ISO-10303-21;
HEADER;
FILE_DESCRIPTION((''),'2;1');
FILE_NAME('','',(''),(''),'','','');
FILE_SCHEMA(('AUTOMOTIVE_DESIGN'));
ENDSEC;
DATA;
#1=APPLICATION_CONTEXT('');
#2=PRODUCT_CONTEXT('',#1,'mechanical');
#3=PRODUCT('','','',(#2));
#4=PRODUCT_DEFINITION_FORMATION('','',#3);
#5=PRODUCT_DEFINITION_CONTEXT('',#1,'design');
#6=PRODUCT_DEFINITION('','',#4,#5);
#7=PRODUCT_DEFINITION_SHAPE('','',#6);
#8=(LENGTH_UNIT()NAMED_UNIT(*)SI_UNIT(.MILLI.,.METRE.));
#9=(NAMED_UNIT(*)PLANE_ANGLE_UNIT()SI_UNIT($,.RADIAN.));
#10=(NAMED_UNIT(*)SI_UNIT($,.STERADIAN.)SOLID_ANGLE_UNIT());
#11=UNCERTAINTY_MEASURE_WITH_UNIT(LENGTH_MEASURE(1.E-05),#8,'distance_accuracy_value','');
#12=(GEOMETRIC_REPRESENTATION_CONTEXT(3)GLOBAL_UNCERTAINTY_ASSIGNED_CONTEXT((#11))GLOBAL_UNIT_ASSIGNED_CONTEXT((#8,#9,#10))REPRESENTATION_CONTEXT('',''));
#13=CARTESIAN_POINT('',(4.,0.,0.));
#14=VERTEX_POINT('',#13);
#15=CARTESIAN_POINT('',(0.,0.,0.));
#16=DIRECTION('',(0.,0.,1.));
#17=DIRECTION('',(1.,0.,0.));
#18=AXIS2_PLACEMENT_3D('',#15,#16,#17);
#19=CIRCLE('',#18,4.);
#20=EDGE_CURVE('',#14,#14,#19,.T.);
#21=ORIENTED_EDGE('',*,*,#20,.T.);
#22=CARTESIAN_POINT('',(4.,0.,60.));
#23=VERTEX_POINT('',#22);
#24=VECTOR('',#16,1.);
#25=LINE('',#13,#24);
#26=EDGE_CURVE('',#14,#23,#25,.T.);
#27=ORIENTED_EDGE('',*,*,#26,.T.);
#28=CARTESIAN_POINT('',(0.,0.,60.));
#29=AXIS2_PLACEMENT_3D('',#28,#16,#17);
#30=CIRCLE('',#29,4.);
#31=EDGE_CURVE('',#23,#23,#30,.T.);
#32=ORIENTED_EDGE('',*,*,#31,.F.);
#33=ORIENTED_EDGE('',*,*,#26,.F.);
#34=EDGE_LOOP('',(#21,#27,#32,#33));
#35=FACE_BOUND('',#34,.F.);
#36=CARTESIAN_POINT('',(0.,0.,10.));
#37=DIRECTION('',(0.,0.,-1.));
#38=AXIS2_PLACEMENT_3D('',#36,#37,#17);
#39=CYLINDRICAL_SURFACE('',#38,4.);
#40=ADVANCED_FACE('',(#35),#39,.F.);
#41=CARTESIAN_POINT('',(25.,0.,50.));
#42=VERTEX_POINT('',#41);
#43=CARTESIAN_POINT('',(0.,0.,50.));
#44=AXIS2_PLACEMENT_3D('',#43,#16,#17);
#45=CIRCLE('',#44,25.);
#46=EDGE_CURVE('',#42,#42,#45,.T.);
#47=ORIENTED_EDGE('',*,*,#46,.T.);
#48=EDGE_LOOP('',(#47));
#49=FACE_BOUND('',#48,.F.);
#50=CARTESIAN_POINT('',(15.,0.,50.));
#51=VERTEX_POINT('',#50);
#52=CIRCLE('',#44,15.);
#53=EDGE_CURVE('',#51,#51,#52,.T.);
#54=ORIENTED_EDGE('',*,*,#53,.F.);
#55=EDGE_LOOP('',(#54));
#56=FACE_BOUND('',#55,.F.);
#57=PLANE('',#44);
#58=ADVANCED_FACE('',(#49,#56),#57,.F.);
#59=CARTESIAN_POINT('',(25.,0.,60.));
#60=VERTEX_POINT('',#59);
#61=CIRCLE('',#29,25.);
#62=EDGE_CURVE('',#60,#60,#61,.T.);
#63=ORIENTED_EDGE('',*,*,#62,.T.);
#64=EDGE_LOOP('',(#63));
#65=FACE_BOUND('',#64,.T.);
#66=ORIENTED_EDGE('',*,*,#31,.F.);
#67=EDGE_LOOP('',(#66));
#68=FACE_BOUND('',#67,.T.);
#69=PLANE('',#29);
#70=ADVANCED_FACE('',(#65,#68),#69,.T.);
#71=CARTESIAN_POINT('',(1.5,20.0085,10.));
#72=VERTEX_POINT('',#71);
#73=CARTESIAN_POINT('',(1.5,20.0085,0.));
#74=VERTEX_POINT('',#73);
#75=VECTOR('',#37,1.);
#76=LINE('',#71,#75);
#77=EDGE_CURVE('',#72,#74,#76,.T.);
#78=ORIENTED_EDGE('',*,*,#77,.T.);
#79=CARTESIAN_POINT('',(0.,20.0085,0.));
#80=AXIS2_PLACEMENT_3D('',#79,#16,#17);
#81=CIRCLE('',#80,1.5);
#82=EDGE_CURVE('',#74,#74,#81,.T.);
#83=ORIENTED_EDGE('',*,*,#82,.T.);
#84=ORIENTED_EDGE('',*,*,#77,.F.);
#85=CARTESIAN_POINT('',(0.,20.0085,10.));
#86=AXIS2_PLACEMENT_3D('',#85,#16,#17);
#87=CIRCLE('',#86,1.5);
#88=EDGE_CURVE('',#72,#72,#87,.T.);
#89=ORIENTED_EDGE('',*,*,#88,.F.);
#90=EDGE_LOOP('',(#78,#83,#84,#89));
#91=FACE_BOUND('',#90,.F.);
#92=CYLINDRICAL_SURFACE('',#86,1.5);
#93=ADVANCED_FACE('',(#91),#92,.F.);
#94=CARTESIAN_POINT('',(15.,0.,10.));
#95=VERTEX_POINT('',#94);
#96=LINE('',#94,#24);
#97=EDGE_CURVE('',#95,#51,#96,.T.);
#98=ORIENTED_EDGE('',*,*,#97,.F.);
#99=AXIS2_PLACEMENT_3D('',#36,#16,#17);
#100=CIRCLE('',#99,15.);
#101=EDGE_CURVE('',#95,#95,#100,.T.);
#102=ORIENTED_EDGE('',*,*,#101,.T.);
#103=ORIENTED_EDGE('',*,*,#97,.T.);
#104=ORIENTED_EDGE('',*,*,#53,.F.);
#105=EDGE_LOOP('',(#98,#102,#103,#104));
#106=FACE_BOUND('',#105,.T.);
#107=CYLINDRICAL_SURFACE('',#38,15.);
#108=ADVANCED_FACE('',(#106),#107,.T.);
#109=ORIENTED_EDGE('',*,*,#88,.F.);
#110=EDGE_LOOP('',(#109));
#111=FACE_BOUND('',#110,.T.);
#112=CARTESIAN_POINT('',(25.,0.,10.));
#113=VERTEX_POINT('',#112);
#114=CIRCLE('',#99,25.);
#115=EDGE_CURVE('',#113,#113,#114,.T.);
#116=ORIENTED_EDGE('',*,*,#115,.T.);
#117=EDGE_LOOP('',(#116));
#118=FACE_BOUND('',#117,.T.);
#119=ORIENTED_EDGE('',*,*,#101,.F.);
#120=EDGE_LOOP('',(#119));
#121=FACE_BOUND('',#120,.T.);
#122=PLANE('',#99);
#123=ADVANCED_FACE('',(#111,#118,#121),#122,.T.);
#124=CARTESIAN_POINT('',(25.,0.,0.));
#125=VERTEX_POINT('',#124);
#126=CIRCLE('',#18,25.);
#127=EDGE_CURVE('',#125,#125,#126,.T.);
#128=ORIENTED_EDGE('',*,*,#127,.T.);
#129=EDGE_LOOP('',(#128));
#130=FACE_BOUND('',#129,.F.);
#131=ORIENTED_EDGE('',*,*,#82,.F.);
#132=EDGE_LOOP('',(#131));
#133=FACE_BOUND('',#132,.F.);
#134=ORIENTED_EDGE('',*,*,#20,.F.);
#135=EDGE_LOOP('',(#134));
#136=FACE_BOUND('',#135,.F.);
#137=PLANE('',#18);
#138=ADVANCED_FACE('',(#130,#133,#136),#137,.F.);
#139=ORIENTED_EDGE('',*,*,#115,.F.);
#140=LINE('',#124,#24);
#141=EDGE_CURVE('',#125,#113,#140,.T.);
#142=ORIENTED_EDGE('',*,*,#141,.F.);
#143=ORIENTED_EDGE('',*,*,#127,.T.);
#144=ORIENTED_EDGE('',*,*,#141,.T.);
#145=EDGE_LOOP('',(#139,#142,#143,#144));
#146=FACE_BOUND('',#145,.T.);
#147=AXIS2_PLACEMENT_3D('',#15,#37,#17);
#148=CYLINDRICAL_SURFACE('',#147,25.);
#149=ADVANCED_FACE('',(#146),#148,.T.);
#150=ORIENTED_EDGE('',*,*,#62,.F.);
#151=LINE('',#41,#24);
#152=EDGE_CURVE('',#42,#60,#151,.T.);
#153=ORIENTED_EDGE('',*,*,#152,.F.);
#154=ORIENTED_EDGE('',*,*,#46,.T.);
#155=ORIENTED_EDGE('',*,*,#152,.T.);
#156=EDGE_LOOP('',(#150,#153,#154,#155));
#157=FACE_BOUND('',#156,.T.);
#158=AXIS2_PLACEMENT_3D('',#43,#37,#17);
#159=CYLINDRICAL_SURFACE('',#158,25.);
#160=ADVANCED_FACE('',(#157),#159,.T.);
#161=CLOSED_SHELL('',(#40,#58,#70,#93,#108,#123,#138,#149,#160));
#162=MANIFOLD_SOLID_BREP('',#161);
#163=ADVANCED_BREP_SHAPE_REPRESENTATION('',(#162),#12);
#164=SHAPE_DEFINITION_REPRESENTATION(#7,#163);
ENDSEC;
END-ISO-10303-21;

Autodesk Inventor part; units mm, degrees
ref_plane "YZ Plane" through (0, 0, 0) normal (1, 0, 0) x (0, 1, 0)
ref_plane "XZ Plane" through (0, 0, 0) normal (0, 1, 0) x (-1, 0, 0)
ref_plane "XY Plane" through (0, 0, 0) normal (0, 0, 1) x (1, 0, 0)
sketch "Boceto1" plane through (0, 0, 0) normal (0, 0, 1) x (1, 0, 0)
  circle A0 centre (0, 0) radius 25
  circle A1 centre (0, 0) radius 4
  circle A2 centre (0, 0) radius 11
  dimension "d0" = 50
  dimension "d3" = 8
  dimension "d34" = 22
extrude "Extrusión1" add sketch "Boceto1" along normal blind 10 contours A0 | A2
sketch "Boceto5" plane through (0, 0, 10) normal (0, 0, 1) x (1, 0, 0)
  circle A0 centre (0, 0) radius 4
  circle A1 centre (0, 0) radius 15
  dimension "d15" = 8
  dimension "d16" = 30
extrude "Extrusión5" add sketch "Boceto5" along normal blind 40
sketch "Boceto6" plane through (0, 0, 50) normal (0, 0, 1) x (1, 0, 0)
  circle A0 centre (0, 0) radius 4 projected
  circle A1 centre (0, 0) radius 25
  circle A2 centre (0, 0) radius 4
  circle A3 centre (0, 0) radius 11
  dimension "d22" = 50
  dimension "d30" = 8
  dimension "d31" = 22
extrude "Extrusión13" add sketch "Boceto6" along normal blind 10 contours A1 | A3
sketch "Boceto17" plane through (0, 0, 10) normal (0, 0, 1) x (1, 0, 0)
  circle A0 centre (0, 20.0085) radius 1.5
  point P0 (0, 0)
  dimension "d102" = 3
extrude "Extrusión14" cut sketch "Boceto17" against normal blind 10
properties part number "carrete"
